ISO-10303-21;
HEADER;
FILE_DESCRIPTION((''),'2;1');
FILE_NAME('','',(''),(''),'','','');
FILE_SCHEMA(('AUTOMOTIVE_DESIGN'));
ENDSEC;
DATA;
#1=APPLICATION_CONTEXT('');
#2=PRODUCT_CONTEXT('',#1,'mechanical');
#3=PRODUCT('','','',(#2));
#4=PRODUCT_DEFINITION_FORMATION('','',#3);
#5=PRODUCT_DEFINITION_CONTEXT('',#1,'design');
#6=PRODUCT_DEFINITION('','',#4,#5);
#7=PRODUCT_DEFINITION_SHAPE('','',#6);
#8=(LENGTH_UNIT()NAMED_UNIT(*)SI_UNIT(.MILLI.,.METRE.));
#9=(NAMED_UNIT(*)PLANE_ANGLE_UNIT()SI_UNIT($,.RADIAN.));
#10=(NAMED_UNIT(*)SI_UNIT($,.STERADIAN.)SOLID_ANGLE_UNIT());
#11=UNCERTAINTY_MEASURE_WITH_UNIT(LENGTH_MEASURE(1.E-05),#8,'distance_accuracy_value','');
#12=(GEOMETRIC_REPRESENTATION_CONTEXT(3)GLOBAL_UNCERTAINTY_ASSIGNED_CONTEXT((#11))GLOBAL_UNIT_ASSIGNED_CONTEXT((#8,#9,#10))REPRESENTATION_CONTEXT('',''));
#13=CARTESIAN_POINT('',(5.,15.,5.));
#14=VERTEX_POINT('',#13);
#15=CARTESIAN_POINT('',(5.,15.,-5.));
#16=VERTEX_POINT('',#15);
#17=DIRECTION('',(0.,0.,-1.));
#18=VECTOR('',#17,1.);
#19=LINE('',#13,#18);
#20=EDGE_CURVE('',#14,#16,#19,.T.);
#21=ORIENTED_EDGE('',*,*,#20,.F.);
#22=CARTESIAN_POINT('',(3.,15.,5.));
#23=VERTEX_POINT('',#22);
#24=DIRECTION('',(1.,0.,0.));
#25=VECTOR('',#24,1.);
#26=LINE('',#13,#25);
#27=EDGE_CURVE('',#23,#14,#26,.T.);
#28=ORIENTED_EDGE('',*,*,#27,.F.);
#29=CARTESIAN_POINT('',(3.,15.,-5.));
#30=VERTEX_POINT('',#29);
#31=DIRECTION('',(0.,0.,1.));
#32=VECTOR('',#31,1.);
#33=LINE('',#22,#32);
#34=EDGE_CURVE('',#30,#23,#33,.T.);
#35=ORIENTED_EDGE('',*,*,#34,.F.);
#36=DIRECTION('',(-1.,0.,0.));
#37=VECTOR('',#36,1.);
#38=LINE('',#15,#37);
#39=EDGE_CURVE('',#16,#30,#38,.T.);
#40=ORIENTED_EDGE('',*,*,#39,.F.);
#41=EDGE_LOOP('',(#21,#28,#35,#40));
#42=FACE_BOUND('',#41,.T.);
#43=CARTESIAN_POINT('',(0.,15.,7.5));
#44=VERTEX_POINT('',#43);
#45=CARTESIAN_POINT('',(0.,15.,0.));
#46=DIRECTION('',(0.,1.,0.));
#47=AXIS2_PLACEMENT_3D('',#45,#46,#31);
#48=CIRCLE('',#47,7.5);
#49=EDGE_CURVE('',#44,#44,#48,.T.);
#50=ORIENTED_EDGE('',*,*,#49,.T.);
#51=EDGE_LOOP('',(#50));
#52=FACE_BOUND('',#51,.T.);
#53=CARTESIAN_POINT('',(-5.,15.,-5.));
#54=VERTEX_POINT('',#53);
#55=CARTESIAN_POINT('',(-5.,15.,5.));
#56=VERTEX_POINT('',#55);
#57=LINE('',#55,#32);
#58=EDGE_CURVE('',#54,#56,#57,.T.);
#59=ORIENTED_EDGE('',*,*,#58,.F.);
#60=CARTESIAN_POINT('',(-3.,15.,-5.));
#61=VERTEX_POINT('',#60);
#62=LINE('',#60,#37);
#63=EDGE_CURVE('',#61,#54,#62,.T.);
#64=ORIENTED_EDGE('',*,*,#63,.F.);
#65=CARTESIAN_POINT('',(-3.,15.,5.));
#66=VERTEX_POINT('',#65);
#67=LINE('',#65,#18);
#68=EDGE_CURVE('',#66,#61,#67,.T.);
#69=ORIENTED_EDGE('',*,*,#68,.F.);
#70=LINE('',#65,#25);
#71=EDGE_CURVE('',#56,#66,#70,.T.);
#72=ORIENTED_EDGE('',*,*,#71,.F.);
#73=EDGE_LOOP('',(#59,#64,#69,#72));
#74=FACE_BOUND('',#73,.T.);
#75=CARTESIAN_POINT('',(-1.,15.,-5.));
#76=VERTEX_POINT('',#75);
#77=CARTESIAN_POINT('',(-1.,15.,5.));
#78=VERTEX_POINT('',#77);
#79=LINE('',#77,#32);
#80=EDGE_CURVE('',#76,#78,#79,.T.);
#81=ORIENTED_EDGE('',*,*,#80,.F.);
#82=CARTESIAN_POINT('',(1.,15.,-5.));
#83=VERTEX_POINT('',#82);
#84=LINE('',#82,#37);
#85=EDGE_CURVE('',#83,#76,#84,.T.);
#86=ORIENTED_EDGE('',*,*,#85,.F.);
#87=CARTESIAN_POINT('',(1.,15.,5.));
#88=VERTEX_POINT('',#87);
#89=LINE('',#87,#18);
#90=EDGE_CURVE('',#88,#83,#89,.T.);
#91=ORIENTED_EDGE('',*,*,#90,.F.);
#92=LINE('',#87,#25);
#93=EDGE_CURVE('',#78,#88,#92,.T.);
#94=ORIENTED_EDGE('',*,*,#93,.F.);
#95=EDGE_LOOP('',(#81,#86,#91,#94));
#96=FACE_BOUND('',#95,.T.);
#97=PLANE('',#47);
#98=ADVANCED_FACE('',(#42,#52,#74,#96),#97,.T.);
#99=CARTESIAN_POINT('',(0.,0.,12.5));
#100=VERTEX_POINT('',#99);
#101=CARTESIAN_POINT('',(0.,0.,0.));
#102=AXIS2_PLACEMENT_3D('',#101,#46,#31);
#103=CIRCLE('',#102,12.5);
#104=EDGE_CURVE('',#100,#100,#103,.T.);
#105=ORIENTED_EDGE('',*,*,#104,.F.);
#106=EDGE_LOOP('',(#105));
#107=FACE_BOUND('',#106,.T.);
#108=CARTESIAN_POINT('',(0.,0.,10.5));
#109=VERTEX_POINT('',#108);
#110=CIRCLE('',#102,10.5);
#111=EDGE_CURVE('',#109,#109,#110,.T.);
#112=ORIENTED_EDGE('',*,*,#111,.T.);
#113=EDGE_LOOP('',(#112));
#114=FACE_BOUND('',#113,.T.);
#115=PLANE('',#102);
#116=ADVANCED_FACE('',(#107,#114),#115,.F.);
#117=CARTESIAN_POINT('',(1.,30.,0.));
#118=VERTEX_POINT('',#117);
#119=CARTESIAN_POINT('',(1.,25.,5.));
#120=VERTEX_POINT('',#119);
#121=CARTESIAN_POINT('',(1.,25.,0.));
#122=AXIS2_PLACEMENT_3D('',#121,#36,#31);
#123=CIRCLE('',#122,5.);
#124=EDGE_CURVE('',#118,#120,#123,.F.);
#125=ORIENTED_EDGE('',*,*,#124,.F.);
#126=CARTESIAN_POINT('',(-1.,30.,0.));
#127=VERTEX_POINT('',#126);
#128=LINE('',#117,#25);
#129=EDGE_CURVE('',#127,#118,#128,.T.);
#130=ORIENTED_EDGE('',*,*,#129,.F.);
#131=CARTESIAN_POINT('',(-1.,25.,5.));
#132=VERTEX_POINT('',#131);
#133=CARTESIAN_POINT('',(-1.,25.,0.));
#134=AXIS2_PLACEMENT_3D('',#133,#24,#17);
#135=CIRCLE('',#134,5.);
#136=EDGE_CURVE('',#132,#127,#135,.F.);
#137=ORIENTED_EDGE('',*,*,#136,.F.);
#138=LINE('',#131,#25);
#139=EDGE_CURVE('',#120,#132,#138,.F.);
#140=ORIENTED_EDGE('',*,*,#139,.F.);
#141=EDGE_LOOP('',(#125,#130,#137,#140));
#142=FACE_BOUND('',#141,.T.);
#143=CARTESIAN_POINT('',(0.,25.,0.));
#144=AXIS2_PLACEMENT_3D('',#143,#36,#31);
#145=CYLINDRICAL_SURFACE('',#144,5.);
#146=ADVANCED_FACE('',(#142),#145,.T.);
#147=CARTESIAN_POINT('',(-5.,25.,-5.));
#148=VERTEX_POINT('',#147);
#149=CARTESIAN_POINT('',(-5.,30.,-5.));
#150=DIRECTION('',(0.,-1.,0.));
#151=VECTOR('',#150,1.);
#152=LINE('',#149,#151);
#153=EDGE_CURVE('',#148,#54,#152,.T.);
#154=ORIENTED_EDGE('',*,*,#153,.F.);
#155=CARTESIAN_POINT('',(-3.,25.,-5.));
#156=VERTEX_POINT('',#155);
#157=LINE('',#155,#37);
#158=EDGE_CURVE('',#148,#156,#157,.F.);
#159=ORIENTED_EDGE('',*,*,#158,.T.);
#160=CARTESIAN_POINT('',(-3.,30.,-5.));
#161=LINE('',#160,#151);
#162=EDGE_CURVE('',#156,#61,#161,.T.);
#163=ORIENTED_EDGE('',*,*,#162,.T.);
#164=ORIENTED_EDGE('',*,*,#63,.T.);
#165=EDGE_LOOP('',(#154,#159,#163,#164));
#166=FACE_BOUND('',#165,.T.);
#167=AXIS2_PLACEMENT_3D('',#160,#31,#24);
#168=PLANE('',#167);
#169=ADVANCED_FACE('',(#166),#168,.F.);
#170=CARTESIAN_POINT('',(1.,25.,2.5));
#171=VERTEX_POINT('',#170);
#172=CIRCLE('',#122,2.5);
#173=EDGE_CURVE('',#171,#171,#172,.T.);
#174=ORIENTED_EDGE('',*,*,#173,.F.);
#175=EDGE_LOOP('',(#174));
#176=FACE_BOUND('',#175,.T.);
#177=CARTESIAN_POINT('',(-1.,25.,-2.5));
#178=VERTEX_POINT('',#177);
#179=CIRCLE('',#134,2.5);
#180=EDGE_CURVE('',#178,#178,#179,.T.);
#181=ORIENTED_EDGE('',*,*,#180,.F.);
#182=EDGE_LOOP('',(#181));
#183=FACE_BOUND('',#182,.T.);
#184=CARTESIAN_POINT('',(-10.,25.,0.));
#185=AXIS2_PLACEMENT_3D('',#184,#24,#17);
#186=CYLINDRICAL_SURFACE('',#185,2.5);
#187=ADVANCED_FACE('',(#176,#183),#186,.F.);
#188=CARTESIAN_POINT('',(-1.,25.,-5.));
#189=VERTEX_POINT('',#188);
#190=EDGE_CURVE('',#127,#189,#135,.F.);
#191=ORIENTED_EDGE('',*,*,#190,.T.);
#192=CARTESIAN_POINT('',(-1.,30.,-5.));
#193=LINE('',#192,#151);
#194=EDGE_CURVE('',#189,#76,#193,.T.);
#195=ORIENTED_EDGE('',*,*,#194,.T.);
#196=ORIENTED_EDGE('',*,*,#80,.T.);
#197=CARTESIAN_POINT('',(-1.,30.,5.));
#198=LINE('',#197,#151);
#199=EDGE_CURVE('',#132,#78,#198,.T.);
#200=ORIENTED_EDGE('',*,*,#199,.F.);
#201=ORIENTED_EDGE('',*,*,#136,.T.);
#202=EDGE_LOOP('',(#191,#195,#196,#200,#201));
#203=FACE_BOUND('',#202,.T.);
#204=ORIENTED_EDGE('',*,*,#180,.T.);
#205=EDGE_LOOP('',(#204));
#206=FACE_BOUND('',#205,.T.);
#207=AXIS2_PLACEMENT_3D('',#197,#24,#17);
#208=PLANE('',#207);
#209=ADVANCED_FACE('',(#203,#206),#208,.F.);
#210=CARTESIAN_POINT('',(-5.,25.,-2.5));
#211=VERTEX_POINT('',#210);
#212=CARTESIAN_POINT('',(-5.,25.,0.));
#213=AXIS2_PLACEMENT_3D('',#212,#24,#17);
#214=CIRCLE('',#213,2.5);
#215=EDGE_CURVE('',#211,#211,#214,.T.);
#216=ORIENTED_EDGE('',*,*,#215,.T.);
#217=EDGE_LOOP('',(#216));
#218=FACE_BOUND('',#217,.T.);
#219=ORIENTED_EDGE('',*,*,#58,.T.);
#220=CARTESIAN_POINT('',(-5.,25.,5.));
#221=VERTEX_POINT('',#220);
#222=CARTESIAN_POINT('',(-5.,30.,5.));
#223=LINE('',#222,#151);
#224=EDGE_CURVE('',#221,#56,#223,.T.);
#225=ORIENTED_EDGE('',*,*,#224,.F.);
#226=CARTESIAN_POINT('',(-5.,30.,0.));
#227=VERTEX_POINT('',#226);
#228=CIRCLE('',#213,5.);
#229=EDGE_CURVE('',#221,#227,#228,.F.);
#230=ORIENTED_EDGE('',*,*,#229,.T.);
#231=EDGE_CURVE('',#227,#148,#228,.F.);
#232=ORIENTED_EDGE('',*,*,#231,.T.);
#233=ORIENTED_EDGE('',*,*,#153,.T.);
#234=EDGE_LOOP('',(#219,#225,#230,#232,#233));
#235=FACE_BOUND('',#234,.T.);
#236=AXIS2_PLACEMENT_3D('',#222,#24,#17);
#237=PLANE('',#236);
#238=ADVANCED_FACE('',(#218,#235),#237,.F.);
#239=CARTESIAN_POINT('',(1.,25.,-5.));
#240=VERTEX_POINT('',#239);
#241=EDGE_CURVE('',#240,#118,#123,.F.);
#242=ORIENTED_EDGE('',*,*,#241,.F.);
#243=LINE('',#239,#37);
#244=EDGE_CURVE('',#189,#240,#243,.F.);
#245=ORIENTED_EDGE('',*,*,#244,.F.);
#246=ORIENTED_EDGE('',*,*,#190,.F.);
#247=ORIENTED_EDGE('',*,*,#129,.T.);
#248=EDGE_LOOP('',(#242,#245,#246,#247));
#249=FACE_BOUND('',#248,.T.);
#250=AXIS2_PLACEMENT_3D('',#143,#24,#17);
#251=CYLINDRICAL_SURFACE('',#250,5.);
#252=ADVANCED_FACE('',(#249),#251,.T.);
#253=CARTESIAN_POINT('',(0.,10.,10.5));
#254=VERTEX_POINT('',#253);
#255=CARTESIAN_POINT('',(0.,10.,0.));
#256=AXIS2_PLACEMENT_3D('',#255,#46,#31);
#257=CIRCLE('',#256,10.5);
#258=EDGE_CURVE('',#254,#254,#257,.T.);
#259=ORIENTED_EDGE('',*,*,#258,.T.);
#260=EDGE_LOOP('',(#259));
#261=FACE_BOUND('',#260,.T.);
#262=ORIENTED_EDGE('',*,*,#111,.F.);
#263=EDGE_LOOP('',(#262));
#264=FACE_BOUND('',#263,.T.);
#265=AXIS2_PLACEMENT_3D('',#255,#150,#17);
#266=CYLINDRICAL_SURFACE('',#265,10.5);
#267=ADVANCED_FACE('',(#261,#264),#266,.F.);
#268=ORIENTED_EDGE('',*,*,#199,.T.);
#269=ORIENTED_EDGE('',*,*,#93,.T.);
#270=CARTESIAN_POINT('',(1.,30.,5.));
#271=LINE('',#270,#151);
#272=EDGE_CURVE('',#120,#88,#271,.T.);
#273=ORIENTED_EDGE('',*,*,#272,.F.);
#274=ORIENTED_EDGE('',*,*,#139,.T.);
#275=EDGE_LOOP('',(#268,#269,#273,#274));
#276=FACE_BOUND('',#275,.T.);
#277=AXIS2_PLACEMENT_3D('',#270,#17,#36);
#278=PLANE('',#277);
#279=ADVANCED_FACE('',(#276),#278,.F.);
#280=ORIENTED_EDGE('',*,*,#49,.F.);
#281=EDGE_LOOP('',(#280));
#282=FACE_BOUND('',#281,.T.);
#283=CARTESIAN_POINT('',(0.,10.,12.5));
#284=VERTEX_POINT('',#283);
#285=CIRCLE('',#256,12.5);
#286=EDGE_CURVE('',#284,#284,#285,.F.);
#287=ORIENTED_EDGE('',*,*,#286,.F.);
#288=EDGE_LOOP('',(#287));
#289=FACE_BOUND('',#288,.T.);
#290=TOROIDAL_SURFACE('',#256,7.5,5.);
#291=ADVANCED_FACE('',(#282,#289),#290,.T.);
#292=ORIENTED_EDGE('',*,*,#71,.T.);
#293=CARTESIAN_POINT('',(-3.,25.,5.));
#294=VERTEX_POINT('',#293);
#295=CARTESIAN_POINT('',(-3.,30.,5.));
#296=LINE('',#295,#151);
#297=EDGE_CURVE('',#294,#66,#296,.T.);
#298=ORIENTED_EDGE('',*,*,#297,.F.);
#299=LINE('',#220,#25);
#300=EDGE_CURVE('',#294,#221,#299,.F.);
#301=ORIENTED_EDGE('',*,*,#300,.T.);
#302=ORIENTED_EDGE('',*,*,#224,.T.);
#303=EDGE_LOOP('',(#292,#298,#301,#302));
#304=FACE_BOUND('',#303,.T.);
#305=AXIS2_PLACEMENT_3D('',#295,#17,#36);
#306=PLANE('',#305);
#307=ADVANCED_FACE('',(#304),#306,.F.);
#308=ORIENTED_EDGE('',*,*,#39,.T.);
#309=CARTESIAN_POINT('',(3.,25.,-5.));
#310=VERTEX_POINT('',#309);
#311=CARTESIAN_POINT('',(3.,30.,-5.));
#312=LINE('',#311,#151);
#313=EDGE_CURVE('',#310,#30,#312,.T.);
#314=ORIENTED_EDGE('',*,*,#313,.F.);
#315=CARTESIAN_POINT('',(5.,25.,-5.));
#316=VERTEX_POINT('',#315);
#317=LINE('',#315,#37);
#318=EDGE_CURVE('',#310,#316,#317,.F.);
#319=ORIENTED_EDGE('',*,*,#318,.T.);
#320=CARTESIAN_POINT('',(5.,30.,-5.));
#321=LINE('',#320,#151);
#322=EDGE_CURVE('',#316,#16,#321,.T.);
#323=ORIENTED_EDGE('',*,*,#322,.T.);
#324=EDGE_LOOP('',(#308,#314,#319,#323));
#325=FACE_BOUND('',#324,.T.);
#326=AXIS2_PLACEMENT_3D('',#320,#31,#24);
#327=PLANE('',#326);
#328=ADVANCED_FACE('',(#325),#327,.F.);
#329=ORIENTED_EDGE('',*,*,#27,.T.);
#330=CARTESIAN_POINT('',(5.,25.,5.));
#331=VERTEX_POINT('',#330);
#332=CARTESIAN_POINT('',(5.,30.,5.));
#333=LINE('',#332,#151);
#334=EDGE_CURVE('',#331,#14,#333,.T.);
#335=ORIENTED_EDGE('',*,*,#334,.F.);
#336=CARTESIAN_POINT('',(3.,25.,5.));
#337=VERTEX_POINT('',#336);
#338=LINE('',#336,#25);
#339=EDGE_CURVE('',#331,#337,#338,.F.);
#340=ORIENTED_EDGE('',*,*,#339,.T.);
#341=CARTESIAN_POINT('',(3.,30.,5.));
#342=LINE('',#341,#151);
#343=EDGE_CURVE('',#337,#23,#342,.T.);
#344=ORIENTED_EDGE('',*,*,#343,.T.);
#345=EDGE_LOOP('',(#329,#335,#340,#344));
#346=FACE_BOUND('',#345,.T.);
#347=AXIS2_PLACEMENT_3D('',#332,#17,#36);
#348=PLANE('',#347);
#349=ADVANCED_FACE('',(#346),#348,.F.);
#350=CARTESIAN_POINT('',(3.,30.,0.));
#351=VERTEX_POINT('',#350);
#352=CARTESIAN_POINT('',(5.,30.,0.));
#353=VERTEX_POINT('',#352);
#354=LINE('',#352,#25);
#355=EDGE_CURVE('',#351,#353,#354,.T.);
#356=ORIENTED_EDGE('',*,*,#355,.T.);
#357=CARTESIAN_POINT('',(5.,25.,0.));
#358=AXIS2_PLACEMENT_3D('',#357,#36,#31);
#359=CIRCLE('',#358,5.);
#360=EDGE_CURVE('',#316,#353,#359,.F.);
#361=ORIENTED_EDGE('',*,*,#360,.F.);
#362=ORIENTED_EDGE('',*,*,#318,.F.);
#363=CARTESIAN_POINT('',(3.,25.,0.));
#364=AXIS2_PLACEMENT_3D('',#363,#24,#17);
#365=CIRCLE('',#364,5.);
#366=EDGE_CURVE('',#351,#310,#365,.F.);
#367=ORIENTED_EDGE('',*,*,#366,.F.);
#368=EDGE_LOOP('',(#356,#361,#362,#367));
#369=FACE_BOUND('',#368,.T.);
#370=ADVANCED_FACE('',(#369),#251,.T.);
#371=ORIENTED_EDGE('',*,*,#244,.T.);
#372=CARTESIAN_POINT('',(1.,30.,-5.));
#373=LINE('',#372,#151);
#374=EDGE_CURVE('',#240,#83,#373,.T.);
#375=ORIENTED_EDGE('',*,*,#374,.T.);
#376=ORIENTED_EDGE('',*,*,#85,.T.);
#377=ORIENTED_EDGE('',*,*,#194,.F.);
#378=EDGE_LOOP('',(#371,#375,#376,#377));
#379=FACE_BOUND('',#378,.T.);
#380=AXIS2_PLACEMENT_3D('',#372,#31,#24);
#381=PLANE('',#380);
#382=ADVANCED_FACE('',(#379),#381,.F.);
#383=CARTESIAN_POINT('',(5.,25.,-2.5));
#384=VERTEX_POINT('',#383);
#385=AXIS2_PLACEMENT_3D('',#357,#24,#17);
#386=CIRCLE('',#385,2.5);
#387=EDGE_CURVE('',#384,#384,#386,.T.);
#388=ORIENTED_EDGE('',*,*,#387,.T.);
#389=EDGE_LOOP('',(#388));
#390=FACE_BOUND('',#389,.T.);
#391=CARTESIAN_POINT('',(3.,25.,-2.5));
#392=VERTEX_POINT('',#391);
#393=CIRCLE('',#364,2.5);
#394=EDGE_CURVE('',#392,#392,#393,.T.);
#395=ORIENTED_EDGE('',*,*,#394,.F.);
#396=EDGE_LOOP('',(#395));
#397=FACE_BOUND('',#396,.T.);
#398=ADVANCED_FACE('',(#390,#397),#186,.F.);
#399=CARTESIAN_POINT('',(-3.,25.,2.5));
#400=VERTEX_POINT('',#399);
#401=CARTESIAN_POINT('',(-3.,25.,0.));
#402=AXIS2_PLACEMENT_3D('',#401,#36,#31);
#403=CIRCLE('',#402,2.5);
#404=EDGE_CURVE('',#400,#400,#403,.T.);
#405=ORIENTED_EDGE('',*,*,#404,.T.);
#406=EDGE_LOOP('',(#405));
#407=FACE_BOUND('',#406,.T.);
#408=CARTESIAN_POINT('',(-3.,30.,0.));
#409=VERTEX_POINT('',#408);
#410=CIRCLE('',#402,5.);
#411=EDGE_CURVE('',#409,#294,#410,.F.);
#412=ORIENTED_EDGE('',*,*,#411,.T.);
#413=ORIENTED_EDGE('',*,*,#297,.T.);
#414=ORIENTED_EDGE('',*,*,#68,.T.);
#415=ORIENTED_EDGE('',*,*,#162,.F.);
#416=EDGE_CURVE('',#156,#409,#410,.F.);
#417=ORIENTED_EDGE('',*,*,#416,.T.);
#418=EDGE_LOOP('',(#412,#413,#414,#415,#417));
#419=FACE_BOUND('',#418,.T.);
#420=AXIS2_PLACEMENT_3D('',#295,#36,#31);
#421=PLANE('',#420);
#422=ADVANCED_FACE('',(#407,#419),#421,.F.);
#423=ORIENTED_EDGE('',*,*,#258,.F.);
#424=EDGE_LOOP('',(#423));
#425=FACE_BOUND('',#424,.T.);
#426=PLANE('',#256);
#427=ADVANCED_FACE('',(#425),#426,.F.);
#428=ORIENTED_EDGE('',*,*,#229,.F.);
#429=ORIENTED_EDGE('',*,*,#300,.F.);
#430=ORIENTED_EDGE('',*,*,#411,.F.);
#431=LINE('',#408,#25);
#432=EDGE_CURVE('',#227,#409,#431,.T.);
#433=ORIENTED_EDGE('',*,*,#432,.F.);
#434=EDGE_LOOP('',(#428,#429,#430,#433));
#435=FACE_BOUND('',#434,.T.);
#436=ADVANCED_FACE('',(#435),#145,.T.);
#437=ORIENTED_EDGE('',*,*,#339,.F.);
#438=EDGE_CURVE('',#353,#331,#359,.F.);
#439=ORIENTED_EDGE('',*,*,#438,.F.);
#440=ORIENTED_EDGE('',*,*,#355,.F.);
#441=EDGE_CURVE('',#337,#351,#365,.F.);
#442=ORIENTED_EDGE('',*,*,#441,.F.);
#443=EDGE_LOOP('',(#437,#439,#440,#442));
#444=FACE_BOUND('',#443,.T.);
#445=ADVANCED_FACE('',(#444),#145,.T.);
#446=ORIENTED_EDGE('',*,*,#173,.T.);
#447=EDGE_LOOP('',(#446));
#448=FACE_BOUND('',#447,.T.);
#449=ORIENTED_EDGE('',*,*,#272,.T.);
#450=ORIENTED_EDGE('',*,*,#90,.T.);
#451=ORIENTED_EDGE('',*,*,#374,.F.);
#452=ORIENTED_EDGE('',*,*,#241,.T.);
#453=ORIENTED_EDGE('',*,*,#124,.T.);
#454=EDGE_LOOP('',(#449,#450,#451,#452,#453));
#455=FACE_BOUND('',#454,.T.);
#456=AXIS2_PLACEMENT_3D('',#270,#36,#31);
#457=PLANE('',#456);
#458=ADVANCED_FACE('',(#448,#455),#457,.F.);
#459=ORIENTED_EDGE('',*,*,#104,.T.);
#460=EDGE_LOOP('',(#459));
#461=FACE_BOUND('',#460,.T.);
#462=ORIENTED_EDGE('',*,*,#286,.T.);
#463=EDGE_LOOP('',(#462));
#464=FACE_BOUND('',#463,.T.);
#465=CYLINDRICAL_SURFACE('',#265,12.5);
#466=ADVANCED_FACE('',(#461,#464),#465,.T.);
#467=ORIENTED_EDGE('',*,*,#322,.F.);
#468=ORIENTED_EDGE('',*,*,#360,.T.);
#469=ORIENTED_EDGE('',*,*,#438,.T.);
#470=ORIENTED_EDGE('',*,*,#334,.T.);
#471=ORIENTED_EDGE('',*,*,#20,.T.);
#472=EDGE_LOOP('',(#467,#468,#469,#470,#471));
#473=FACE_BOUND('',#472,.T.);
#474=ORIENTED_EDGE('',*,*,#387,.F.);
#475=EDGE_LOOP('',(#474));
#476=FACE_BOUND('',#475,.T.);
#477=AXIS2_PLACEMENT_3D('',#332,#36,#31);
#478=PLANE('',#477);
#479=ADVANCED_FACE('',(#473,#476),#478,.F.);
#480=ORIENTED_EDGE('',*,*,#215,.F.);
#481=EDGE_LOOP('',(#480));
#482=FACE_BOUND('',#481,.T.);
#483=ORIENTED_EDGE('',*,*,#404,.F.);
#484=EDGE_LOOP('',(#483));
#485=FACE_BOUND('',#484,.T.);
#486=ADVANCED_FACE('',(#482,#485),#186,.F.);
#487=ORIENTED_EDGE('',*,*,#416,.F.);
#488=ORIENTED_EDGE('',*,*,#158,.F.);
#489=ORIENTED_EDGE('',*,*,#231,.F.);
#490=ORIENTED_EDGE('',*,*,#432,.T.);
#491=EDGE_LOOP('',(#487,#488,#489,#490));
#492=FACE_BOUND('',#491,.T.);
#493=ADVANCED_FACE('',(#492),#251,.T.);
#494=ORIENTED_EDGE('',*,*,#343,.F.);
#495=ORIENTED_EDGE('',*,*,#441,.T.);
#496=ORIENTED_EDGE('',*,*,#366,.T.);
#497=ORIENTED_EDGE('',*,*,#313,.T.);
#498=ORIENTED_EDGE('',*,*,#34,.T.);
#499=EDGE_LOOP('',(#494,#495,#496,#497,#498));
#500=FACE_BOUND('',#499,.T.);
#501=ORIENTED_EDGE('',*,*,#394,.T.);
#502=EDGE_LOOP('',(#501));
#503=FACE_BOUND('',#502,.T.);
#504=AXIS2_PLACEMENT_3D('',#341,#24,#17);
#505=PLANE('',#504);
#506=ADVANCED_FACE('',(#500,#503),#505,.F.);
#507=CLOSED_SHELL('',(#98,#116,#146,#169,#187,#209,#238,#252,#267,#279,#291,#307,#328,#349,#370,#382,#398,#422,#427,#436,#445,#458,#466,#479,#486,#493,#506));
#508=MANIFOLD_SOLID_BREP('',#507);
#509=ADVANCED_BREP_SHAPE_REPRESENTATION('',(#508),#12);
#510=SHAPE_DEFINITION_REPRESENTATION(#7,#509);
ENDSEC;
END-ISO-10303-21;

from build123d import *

# Parameters (mm, degrees)
SKETCH1_R           = 12.5
SKETCH1_R_2         = 10.5
BOSS_EXTRUDE1_DEPTH = 10
SKETCH2_R           = 12.5
BOSS_EXTRUDE2_DEPTH = 5
SKETCH3_W           = 2
SKETCH3_H           = 10
BOSS_EXTRUDE3_DEPTH = 15
FILLET1_R           = 5
FILLET2_R           = 5
SKETCH4_R           = 2.5
CUT_EXTRUDE1_DEPTH  = 15


with BuildPart() as part:
    # Sketch1 → Boss-Extrude1 (new body)
    with BuildSketch(Plane(origin=(0, 0, 0), x_dir=(1, 0, 0), z_dir=(0, 1, 0))):
        with Locations(Location((0, 0, 0), (0, 0, 270))):
            Circle(SKETCH1_R)
        with Locations(Location((0, 0, 0), (0, 0, 270))):
            Circle(SKETCH1_R_2, mode=Mode.SUBTRACT)
    extrude(amount=BOSS_EXTRUDE1_DEPTH)

    # Sketch2 → Boss-Extrude2 (add)
    with BuildSketch(Plane(origin=(0, 10, 0), x_dir=(1, 0, 0), z_dir=(0, 1, 0))):
        with Locations(Location((0, 0, 0), (0, 0, 270))):
            Circle(SKETCH2_R)
    extrude(amount=BOSS_EXTRUDE2_DEPTH)

    # Sketch3 → Boss-Extrude3 (add)
    with BuildSketch(Plane(origin=(0, 15, 0), x_dir=(1, 0, 0), z_dir=(0, 1, 0))):
        with Locations((4, 0)):
            Rectangle(SKETCH3_W, SKETCH3_H)
        Rectangle(SKETCH3_W, SKETCH3_H)
        with Locations((-4, 0)):
            Rectangle(SKETCH3_W, SKETCH3_H)
    extrude(amount=BOSS_EXTRUDE3_DEPTH)

    # Fillet1
    fillet1_edges = [part.edges().sort_by_distance(p)[0] for p in [
        (0, 15, -12.5),
    ]]
    fillet(fillet1_edges, radius=FILLET1_R)

    # Fillet2
    fillet2_edges = [part.edges().sort_by_distance(p)[0] for p in [
        (-4, 30, -5),
        (0, 30, -5),
        (4, 30, -5),
        (-4, 30, 5),
        (0, 30, 5),
        (4, 30, 5),
    ]]
    fillet(fillet2_edges, radius=FILLET2_R - 0.0001)  # a hair under: the kernel refuses the full size

    # Sketch4 → Cut-Extrude1 (cut)
    with BuildSketch(Plane(origin=(5, 0, 0), x_dir=(0, 0, -1), z_dir=(1, 0, 0))):
        with Locations((0, 25)):
            Circle(SKETCH4_R)
    extrude(amount=-CUT_EXTRUDE1_DEPTH, mode=Mode.SUBTRACT)


solid = part.part
